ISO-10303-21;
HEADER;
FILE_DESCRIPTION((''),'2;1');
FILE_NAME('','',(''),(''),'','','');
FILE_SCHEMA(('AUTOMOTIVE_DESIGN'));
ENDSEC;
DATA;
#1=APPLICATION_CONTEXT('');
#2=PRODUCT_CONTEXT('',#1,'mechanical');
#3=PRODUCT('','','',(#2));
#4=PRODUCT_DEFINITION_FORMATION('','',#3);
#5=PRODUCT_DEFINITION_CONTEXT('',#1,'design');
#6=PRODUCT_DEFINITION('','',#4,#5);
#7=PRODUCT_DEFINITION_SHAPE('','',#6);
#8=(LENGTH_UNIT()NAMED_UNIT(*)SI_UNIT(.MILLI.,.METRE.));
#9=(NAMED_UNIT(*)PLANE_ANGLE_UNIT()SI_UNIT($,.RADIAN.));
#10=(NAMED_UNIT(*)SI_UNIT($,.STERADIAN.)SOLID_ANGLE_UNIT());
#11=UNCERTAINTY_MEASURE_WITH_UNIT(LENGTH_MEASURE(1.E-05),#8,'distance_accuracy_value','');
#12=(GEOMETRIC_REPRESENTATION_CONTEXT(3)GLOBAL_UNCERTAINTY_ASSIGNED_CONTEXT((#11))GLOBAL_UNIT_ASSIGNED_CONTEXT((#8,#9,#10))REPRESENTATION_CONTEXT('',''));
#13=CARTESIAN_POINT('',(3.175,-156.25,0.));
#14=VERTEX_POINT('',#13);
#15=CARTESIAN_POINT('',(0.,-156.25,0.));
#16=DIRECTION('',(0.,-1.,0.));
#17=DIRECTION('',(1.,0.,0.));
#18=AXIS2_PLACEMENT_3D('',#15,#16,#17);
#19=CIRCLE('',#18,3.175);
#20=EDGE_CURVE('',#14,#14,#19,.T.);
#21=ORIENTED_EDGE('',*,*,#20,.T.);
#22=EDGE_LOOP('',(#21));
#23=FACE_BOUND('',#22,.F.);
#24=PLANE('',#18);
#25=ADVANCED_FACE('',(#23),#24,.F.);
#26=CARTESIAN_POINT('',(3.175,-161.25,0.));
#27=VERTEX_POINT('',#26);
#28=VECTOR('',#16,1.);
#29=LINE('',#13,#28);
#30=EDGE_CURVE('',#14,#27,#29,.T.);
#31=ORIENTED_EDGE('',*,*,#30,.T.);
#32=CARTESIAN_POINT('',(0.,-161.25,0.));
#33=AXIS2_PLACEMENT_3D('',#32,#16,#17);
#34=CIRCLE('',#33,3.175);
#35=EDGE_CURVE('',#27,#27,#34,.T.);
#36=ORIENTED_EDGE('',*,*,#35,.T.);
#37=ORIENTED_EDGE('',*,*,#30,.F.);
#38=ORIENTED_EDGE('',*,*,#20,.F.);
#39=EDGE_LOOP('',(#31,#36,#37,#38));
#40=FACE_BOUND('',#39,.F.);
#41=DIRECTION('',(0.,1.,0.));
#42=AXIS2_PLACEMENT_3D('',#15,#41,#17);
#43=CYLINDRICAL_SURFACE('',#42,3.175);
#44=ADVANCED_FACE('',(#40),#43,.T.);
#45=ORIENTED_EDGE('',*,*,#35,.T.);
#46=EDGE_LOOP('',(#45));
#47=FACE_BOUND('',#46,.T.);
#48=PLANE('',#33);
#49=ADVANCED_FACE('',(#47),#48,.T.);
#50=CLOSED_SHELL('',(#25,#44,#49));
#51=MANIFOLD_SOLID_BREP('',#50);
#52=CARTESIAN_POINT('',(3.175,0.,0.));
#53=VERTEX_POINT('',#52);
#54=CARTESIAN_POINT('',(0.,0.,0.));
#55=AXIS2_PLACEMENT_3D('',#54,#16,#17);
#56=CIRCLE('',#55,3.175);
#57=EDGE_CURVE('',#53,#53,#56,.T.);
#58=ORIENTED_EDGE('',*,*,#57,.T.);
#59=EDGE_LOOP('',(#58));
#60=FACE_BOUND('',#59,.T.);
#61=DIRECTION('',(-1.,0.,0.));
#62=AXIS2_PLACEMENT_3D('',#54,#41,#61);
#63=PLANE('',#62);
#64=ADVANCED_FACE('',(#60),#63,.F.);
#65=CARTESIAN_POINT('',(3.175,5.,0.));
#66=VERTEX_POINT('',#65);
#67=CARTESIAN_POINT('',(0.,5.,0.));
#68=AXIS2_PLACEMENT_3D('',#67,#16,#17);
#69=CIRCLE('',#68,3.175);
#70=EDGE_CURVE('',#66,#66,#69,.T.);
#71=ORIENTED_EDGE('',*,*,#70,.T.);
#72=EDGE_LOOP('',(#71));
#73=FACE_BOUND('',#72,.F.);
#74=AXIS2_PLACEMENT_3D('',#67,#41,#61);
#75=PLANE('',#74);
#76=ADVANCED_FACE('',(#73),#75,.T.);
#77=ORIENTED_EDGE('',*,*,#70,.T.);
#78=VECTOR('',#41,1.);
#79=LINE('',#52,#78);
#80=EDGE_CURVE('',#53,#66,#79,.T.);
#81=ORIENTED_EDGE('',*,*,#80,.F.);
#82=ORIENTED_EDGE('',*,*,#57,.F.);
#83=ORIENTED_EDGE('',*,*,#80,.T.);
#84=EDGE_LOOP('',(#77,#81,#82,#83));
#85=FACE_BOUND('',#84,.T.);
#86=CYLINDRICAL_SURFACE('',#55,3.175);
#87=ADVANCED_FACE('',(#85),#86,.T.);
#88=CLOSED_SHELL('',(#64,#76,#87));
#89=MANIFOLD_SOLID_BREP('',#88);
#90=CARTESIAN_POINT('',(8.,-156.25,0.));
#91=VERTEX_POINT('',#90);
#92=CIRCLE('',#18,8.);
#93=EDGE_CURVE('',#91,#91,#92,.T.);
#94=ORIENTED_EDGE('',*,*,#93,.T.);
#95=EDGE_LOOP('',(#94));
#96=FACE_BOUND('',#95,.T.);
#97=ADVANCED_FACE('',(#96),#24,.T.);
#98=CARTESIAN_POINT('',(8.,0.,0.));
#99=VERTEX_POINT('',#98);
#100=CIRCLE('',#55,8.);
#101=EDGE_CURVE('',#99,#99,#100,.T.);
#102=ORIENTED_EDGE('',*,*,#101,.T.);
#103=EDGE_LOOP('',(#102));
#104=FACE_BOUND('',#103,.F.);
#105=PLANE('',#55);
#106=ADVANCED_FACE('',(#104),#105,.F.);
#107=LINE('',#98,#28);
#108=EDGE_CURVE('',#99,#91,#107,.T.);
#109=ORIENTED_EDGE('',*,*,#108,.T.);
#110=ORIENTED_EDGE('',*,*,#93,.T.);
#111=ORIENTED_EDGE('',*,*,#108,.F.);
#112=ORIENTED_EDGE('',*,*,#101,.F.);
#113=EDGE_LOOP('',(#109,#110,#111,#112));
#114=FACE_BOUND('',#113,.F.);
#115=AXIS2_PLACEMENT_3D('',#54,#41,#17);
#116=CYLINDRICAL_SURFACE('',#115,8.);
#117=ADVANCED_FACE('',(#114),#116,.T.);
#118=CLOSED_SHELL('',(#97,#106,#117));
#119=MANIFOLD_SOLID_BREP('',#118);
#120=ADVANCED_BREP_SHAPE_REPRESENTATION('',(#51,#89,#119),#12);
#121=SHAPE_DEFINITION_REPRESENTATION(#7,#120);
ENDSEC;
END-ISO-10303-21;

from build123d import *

# Parameters (mm, degrees)
F0_R     = 8
F1_DEPTH = 156.25
F2_R     = 3.175
F3_DEPTH = 5


# Not quite as in the source:
# - a pattern or mirror of a feature is missing from the dataset's text; its kind, count and spacing are read off the source's solid


with BuildPart() as f1:
    # F0 (on Front) → F1 (new body)
    with BuildSketch(Plane.XZ):
        Circle(F0_R)
    extrude(amount=F1_DEPTH)


with BuildPart() as f3:
    # F2 (on face) → F3 (new body)
    with BuildSketch(Plane.XZ.offset(156.25)):
        Circle(F2_R)
    extrude(amount=F3_DEPTH)


with BuildPart() as f3_copies_1:
    # F3_copies: instance of F3
    add(f3.part.mirror(Plane.ZX.offset(-78.125)))


solid = Compound([f1.part, f3.part, f3_copies_1.part])
